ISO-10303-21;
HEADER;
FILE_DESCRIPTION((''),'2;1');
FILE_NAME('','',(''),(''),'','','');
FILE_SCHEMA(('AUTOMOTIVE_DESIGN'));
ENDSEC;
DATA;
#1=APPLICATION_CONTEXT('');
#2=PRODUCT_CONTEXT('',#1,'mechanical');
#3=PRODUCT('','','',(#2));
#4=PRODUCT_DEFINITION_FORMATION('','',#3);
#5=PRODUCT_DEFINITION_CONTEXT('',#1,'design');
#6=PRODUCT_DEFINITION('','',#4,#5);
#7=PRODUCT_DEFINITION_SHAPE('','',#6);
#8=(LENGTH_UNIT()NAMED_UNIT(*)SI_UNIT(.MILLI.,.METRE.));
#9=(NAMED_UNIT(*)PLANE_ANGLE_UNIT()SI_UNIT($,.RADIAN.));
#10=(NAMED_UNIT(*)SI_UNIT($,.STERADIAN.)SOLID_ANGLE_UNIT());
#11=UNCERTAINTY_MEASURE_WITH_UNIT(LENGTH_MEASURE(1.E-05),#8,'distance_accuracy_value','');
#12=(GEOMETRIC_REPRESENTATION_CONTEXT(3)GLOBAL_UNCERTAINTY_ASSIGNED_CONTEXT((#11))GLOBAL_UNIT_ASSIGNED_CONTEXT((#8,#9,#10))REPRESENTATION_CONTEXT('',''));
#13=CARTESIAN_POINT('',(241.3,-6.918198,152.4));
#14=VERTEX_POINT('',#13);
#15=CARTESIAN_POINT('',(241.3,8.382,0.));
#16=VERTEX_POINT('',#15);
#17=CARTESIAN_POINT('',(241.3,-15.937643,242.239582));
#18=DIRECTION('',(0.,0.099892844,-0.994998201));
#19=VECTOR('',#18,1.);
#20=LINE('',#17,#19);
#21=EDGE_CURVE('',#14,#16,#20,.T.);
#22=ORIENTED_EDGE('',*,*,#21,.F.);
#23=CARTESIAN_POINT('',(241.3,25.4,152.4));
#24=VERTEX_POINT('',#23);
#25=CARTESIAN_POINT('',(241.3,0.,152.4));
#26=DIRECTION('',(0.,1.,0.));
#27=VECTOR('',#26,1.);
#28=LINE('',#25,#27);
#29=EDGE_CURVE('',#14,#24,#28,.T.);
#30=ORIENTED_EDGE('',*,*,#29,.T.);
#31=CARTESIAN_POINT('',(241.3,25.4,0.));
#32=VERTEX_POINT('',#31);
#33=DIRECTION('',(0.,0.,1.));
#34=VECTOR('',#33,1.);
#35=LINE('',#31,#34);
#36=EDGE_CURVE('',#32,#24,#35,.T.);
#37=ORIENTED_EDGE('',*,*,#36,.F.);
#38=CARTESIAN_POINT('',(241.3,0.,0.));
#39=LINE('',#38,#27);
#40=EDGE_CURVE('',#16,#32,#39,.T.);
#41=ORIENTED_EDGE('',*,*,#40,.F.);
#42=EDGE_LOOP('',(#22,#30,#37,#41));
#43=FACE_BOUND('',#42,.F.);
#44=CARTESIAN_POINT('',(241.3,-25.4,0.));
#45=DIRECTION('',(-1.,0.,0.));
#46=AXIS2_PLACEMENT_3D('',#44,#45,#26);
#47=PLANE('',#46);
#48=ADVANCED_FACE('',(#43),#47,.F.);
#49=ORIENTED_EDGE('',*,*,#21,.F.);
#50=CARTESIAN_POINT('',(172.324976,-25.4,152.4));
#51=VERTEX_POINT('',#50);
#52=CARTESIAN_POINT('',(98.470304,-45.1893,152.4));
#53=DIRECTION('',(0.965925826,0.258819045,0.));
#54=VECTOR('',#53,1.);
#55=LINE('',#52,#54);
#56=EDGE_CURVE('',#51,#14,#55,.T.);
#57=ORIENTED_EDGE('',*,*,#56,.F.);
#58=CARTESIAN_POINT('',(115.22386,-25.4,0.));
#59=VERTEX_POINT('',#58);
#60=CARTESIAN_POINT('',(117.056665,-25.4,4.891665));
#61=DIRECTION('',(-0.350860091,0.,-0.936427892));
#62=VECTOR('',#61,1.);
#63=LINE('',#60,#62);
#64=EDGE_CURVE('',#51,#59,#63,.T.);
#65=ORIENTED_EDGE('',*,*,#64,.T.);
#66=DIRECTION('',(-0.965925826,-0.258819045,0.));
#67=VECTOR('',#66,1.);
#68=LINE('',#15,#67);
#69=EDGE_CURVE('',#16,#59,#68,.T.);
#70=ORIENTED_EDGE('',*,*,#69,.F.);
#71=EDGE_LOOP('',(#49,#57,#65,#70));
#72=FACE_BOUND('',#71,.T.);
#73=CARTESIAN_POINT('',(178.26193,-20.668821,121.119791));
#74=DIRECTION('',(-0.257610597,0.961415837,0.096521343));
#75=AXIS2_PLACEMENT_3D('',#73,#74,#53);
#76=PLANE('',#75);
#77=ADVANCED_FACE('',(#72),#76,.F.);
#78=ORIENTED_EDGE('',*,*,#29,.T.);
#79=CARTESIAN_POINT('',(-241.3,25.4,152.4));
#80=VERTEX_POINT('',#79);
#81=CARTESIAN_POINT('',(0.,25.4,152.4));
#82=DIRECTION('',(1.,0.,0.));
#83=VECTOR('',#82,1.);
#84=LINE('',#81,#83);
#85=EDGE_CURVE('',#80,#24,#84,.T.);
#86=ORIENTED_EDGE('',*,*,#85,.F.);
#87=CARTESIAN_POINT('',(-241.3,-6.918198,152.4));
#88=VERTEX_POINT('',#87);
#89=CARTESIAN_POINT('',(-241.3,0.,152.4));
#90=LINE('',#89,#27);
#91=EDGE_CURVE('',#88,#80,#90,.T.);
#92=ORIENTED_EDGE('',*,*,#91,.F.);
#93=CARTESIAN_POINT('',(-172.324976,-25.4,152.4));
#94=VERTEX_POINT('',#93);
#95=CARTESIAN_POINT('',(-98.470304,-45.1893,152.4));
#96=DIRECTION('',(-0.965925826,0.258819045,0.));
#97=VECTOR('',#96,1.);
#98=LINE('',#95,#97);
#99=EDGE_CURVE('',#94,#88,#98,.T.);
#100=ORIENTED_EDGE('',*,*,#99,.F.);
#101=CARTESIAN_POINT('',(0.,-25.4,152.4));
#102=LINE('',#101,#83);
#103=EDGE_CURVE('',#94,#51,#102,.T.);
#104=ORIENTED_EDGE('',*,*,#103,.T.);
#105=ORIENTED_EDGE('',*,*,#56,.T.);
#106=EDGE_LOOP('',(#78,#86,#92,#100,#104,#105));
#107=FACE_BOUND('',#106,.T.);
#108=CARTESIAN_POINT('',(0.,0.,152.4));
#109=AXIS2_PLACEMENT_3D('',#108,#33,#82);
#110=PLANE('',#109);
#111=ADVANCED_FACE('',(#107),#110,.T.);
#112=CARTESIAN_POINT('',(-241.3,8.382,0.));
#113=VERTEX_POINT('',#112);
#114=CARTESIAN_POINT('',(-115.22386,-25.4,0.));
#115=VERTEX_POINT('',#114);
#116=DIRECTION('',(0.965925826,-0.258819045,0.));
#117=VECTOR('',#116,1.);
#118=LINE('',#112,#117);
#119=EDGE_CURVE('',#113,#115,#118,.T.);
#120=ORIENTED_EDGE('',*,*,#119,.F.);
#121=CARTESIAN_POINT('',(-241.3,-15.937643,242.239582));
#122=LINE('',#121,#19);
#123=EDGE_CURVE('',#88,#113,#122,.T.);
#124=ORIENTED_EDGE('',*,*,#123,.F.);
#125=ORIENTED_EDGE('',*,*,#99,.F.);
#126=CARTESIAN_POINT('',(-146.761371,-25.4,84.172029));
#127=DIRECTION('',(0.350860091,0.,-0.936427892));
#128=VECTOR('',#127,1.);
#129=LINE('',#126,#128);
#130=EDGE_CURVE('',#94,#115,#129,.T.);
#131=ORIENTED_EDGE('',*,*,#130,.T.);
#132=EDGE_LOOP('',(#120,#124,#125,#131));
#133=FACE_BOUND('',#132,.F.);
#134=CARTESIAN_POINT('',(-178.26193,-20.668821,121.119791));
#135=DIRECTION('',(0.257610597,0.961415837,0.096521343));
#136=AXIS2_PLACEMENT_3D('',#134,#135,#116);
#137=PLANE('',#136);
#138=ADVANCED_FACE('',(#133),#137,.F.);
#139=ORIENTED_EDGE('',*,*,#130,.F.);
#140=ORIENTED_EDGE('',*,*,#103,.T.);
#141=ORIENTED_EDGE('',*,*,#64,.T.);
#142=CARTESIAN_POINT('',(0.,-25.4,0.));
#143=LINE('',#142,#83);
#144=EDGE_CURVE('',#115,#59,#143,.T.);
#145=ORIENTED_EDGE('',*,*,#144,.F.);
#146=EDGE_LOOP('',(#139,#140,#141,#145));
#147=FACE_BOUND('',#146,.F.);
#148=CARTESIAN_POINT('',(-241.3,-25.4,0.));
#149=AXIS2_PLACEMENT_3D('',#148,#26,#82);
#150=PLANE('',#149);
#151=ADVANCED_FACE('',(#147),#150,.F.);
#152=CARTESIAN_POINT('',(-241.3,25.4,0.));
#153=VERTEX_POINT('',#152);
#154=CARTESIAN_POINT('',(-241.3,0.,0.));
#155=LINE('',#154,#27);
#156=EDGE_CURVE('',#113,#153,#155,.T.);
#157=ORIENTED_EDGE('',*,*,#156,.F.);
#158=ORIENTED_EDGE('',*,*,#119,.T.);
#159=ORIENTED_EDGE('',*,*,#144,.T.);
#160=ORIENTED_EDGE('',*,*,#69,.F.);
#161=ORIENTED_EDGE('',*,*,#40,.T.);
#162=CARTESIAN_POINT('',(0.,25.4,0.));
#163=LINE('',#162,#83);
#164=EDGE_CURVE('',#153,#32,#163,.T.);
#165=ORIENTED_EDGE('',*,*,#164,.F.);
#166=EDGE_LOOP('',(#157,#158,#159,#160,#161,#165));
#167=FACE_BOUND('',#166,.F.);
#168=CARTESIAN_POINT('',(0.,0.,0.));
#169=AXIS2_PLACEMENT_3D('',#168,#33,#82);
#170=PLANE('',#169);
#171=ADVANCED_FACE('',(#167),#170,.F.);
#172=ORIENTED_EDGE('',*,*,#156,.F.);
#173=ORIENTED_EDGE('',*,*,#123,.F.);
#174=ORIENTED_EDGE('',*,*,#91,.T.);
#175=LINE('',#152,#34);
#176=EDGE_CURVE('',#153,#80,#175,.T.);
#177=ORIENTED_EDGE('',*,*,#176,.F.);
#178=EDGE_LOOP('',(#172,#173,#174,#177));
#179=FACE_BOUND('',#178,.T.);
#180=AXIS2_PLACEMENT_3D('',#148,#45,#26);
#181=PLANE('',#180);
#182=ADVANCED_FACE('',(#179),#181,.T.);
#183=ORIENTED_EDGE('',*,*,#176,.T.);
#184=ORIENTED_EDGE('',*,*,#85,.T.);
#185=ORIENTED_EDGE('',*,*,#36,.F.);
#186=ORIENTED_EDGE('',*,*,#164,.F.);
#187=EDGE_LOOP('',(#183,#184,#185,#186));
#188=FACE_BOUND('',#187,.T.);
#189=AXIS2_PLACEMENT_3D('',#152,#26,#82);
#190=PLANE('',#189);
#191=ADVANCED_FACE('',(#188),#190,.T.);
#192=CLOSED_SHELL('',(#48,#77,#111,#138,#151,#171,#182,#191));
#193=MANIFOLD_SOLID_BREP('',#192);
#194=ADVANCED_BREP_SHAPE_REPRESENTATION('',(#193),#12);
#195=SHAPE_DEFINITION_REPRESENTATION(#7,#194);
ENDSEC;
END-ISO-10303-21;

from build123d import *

# Parameters (mm, degrees)
F0_W     = 482.6
F0_H     = 50.8
F1_DEPTH = 152.4


# Not quite as in the source:
# - a pattern or mirror of a feature is missing from the dataset's text; its kind, count and spacing are read off the source's solid


with BuildPart() as f1:
    # F0 (on Top) → F1 (new body)
    with BuildSketch(Plane.XY):
        Rectangle(F0_W, F0_H)
    extrude(amount=F1_DEPTH)

    # F4: sweep along a path in F3
    with BuildLine(Plane(origin=(-241.3, 0, 0), x_dir=(0, -1, 0), z_dir=(-1, 0, 0))) as f4_path:
        Line((15.9376427472, 242.2395817821), (-8.382, 0))
    # F2 (on face) → F4 (sweep, cut)
    with BuildSketch(Plane(origin=(0, 0, 0), x_dir=(1, 0, 0), z_dir=(0, 0, -1))):
        Polygon((-241.3, 25.4), (-241.3, -8.382), (-115.2238596187, 25.4), align=None)
    f4 = sweep(path=f4_path.line, mode=Mode.SUBTRACT)

    # F4_copies: F4 across plane
    add(f4.mirror(Plane(origin=(0, 0, 0), x_dir=(0, 0, 1), z_dir=(1, 0, 0))), mode=Mode.SUBTRACT)


solid = f1.part
